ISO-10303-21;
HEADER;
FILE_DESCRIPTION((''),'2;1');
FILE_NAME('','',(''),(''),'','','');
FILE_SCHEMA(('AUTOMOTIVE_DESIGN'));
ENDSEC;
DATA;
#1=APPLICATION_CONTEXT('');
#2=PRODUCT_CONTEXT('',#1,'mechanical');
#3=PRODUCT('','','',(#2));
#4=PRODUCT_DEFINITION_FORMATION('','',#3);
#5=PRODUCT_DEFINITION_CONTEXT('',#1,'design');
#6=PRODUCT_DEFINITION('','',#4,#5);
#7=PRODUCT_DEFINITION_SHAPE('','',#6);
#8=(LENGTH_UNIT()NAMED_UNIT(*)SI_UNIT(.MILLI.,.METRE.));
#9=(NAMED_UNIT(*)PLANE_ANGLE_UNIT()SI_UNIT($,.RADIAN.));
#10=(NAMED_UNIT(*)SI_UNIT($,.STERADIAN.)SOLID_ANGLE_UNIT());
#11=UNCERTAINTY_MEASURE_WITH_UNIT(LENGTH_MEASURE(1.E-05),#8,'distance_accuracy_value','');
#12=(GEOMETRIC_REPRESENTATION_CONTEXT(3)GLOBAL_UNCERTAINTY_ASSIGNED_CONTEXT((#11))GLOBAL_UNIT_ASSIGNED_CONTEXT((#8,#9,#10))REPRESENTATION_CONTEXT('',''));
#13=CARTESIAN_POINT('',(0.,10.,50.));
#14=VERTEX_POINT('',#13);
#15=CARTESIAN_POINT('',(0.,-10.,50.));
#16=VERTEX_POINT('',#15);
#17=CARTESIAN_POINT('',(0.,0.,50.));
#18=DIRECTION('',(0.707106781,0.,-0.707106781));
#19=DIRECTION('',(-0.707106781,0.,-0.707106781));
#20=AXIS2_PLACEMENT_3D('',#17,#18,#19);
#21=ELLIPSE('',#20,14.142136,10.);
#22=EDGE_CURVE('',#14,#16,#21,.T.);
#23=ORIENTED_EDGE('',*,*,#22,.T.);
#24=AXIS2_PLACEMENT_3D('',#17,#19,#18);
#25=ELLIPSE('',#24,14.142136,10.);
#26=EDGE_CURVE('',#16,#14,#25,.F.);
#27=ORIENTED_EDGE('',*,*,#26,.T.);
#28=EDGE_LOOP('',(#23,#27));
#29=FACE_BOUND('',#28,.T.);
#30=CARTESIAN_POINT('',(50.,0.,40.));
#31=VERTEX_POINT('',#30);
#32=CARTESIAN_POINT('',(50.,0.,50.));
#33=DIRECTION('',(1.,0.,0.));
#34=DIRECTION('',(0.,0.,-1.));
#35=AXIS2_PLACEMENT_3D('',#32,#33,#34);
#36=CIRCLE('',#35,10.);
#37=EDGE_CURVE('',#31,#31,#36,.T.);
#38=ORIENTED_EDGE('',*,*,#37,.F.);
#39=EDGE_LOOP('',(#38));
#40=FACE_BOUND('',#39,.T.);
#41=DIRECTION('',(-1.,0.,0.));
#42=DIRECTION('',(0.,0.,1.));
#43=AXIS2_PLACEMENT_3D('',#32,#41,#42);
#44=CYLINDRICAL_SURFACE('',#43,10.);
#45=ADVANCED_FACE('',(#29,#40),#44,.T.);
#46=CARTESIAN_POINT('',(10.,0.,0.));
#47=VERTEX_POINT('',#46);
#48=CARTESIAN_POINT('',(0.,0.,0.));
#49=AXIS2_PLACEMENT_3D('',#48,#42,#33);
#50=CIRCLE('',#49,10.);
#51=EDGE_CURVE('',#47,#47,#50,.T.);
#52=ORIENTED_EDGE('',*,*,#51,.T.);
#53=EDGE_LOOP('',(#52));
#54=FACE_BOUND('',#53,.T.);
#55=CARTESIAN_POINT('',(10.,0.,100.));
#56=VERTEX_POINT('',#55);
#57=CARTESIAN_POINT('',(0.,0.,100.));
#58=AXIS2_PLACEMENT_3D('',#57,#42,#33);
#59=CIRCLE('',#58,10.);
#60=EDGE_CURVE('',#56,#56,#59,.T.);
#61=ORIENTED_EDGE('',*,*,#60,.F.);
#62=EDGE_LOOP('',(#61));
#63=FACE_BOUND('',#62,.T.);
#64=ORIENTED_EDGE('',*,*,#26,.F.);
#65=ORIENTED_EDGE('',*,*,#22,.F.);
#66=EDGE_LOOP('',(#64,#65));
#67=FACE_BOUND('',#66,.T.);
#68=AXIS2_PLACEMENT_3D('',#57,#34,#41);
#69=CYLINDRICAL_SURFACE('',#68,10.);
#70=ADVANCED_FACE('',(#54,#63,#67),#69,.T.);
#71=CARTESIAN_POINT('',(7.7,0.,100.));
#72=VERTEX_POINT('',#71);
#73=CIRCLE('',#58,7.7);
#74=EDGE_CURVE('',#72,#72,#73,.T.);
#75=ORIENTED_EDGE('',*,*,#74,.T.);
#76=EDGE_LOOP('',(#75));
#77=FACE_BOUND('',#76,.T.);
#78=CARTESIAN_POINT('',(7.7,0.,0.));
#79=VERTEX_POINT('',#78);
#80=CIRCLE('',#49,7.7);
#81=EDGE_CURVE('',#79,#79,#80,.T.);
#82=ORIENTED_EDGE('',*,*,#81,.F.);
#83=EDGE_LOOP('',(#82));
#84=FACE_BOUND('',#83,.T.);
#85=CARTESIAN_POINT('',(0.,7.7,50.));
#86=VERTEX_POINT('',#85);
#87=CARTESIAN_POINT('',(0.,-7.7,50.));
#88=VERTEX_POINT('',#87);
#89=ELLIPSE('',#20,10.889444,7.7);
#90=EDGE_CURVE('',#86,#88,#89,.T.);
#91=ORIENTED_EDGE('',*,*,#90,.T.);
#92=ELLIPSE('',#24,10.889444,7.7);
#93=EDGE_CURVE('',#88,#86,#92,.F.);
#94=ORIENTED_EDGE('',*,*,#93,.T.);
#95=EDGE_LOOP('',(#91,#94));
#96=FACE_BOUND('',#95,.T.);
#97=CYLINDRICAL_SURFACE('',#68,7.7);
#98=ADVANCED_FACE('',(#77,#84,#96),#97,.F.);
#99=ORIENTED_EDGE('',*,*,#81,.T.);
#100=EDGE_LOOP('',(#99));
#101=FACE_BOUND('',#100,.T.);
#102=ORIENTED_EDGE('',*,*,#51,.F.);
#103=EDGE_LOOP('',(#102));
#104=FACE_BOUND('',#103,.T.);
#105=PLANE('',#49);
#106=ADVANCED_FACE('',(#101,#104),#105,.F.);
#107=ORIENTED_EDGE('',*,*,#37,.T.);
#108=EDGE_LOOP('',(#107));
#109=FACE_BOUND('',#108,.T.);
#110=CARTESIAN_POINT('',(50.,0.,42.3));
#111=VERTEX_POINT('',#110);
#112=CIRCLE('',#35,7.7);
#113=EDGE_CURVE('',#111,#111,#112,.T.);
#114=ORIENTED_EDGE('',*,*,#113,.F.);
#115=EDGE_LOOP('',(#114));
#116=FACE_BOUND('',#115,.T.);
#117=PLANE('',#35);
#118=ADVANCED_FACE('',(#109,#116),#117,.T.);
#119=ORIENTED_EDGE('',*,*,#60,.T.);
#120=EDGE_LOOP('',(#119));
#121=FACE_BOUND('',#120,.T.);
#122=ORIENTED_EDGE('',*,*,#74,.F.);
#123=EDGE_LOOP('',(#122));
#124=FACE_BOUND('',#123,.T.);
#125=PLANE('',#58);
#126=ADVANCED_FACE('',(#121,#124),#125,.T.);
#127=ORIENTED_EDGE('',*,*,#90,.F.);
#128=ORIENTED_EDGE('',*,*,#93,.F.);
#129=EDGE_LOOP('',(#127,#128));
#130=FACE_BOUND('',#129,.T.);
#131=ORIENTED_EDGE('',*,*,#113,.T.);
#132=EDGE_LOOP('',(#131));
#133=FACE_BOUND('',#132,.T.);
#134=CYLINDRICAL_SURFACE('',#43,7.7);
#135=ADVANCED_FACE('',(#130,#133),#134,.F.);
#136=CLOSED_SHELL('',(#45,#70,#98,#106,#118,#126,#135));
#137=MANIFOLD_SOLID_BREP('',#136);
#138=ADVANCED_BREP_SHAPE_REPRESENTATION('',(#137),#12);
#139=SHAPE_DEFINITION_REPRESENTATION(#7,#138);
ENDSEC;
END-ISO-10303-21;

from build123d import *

# Parameters (mm, degrees)
SKETCH12_R          = 10
BOSS_EXTRUDE2_DEPTH = 100
SKETCH13_R          = 10
BOSS_EXTRUDE3_DEPTH = 50
SHELL7_OUTLINE_R    = 7.7
SHELL7_DEPTH        = 100
SHELL7_START        = -1e-07
SHELL7_2_OUTLINE_R  = 7.7
SHELL7_2_DEPTH      = 50.0000001


with BuildPart() as part:
    # Sketch12 → Boss-Extrude2 (new body)
    with BuildSketch(Plane.XY):
        with Locations(Location((0, 0, 0), (0, 0, 180))):
            Circle(SKETCH12_R)
    extrude(amount=BOSS_EXTRUDE2_DEPTH)

    # Sketch13 → Boss-Extrude3 (add)
    with BuildSketch(Plane(origin=(0, 0, 0), x_dir=(0, 0, -1), z_dir=(1, 0, 0))):
        with Locations((-50, 0)):
            Circle(SKETCH13_R)
    extrude(amount=BOSS_EXTRUDE3_DEPTH)

    # Shell7: read off the stored shape, not the designer's step
    # Shell7 outline → Shell7 (cut)
    with BuildSketch(Plane.XY):
        Circle(SHELL7_OUTLINE_R)
    extrude(amount=SHELL7_DEPTH, mode=Mode.SUBTRACT)

    # Shell7 2 outline → Shell7 2 (cut)
    with BuildSketch(Plane.YZ.offset(SHELL7_START)):
        with Locations((0, 50)):
            Circle(SHELL7_2_OUTLINE_R)
    extrude(amount=SHELL7_2_DEPTH, mode=Mode.SUBTRACT)


solid = part.part
